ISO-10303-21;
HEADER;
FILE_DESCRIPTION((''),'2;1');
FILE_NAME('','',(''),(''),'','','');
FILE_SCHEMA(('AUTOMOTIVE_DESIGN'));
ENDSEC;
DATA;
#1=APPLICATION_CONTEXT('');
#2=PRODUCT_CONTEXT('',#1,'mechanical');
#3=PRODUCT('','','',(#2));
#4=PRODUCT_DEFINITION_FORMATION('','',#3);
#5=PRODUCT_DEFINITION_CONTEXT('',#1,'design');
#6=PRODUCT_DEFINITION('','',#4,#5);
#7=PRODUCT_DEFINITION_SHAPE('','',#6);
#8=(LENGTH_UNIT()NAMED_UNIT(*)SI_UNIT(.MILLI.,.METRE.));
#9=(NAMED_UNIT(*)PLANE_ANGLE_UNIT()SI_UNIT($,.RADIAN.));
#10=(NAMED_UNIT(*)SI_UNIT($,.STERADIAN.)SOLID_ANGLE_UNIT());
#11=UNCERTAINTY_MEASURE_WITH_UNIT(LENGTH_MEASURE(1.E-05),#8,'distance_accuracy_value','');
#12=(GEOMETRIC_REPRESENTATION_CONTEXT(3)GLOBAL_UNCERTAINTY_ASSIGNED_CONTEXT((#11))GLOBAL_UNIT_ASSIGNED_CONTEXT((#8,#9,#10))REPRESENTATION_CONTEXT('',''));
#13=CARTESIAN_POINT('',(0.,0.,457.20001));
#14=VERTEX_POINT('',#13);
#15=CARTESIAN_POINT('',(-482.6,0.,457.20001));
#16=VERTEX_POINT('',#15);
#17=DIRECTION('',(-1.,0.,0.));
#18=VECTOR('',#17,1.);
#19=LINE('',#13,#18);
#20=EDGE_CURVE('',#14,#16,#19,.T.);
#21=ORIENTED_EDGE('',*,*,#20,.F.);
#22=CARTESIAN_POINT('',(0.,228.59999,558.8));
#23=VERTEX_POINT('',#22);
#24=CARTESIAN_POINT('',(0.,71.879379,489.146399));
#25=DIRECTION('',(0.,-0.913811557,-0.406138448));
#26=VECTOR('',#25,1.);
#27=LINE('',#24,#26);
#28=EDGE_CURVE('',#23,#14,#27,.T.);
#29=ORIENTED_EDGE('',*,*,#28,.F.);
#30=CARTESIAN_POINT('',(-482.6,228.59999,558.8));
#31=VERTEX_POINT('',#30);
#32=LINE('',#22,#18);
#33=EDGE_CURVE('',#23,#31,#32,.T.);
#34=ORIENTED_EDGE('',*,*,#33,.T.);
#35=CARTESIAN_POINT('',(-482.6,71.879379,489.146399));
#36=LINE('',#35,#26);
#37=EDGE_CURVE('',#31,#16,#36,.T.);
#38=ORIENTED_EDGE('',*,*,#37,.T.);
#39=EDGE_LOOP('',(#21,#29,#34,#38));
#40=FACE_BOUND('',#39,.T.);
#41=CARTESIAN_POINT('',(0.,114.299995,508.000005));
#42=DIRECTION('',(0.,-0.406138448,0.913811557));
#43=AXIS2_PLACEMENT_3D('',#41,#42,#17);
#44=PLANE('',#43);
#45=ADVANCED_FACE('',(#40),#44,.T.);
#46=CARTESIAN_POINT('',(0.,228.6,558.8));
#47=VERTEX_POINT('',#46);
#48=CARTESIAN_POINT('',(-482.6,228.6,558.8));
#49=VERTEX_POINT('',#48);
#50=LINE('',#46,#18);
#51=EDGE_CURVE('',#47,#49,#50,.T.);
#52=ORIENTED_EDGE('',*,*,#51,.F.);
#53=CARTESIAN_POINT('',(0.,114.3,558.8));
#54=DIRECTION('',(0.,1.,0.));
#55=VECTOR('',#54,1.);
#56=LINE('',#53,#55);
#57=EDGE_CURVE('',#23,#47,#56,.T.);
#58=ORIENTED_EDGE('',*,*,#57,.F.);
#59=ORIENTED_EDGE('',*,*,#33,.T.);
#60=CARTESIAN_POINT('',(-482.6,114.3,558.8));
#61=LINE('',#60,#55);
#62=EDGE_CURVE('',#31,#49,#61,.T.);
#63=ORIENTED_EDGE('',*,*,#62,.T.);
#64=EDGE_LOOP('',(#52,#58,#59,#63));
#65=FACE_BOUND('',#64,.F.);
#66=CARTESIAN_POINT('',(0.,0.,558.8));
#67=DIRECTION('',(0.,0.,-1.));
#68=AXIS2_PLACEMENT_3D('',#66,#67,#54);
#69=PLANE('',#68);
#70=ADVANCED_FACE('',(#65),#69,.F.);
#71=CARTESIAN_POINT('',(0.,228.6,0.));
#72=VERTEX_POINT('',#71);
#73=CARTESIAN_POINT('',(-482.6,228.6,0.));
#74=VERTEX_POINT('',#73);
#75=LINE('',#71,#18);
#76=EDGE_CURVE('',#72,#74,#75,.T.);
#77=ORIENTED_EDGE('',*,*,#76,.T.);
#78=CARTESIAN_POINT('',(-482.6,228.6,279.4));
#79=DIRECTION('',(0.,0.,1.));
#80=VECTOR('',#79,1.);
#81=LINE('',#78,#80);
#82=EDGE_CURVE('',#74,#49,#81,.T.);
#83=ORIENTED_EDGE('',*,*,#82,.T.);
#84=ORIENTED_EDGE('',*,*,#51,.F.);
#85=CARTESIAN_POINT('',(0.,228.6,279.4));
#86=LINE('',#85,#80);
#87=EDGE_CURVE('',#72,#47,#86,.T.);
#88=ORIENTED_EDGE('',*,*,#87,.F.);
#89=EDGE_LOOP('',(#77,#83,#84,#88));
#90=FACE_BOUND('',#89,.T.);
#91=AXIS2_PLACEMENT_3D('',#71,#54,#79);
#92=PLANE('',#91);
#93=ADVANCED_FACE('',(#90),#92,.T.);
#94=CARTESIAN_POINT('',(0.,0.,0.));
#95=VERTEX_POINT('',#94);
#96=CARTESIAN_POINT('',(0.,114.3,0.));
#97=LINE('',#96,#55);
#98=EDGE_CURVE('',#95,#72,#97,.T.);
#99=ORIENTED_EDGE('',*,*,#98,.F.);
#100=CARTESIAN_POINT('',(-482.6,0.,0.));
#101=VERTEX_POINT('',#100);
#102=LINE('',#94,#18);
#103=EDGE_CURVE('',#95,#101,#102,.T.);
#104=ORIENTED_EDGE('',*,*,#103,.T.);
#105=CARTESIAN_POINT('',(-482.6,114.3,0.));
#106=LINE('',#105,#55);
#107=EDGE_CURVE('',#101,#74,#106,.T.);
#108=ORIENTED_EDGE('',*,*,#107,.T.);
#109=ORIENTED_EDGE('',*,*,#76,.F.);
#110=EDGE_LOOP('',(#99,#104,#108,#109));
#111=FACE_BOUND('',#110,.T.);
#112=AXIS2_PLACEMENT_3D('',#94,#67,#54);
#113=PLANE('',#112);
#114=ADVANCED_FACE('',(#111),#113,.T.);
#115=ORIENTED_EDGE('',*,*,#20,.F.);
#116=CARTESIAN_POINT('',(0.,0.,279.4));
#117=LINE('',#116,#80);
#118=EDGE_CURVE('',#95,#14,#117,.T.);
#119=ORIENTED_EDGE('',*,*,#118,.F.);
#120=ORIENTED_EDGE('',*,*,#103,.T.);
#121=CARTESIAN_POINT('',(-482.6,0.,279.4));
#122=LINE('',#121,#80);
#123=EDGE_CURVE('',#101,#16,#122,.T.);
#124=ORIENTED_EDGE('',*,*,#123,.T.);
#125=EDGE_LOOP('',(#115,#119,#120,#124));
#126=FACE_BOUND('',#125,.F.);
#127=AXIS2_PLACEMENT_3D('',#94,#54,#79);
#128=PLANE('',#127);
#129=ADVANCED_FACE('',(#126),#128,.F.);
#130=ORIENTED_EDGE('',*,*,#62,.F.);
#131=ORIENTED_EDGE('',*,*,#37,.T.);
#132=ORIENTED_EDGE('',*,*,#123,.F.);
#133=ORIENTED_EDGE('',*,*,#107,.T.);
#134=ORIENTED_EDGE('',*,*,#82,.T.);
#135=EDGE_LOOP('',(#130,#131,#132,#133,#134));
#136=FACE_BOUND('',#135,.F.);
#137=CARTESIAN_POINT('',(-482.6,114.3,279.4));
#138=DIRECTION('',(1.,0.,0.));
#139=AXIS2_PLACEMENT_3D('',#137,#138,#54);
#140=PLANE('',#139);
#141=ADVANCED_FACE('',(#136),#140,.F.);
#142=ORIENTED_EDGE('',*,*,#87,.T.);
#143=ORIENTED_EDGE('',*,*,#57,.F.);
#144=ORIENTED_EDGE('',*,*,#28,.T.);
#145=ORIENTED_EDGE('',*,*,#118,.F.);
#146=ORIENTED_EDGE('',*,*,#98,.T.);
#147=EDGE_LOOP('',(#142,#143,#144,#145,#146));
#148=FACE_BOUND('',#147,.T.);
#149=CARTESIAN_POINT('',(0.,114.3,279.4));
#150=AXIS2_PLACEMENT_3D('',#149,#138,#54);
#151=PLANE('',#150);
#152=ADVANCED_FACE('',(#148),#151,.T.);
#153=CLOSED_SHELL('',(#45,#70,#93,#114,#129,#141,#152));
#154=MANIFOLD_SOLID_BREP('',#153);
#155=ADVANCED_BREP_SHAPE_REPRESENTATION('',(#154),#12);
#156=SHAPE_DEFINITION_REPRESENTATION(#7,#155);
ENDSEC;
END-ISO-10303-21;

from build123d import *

# Parameters (mm, degrees)
F0_W     = 228.6
F0_H     = 558.8
F1_DEPTH = 482.6
F2_SIZE2 = 101.59999
F2_SIZE  = 228.59999


# Not quite as in the source:
# - a fillet or chamfer is up to 0.001 mm smaller than in the source, because OpenCascade refuses the exact size


with BuildPart() as f1:
    # F0 (on Right) → F1 (new body)
    with BuildSketch(Plane.YZ):
        with Locations((114.3, 279.4)):
            Rectangle(F0_W, F0_H)
    extrude(amount=-F1_DEPTH)

    # F2 (size 228.6 and 101.6 in the source; OpenCascade refuses exactly that, so slightly less here)
    f2_edges = [f1.edges().sort_by_distance(p)[0] for p in [
        (-241.3, 0, 558.8),
    ]]
    f2_side = f1.faces().sort_by_distance((-241.3, 114.3, 558.8))[0]
    chamfer(f2_edges, length=F2_SIZE, length2=F2_SIZE2, reference=f2_side)


solid = f1.part
